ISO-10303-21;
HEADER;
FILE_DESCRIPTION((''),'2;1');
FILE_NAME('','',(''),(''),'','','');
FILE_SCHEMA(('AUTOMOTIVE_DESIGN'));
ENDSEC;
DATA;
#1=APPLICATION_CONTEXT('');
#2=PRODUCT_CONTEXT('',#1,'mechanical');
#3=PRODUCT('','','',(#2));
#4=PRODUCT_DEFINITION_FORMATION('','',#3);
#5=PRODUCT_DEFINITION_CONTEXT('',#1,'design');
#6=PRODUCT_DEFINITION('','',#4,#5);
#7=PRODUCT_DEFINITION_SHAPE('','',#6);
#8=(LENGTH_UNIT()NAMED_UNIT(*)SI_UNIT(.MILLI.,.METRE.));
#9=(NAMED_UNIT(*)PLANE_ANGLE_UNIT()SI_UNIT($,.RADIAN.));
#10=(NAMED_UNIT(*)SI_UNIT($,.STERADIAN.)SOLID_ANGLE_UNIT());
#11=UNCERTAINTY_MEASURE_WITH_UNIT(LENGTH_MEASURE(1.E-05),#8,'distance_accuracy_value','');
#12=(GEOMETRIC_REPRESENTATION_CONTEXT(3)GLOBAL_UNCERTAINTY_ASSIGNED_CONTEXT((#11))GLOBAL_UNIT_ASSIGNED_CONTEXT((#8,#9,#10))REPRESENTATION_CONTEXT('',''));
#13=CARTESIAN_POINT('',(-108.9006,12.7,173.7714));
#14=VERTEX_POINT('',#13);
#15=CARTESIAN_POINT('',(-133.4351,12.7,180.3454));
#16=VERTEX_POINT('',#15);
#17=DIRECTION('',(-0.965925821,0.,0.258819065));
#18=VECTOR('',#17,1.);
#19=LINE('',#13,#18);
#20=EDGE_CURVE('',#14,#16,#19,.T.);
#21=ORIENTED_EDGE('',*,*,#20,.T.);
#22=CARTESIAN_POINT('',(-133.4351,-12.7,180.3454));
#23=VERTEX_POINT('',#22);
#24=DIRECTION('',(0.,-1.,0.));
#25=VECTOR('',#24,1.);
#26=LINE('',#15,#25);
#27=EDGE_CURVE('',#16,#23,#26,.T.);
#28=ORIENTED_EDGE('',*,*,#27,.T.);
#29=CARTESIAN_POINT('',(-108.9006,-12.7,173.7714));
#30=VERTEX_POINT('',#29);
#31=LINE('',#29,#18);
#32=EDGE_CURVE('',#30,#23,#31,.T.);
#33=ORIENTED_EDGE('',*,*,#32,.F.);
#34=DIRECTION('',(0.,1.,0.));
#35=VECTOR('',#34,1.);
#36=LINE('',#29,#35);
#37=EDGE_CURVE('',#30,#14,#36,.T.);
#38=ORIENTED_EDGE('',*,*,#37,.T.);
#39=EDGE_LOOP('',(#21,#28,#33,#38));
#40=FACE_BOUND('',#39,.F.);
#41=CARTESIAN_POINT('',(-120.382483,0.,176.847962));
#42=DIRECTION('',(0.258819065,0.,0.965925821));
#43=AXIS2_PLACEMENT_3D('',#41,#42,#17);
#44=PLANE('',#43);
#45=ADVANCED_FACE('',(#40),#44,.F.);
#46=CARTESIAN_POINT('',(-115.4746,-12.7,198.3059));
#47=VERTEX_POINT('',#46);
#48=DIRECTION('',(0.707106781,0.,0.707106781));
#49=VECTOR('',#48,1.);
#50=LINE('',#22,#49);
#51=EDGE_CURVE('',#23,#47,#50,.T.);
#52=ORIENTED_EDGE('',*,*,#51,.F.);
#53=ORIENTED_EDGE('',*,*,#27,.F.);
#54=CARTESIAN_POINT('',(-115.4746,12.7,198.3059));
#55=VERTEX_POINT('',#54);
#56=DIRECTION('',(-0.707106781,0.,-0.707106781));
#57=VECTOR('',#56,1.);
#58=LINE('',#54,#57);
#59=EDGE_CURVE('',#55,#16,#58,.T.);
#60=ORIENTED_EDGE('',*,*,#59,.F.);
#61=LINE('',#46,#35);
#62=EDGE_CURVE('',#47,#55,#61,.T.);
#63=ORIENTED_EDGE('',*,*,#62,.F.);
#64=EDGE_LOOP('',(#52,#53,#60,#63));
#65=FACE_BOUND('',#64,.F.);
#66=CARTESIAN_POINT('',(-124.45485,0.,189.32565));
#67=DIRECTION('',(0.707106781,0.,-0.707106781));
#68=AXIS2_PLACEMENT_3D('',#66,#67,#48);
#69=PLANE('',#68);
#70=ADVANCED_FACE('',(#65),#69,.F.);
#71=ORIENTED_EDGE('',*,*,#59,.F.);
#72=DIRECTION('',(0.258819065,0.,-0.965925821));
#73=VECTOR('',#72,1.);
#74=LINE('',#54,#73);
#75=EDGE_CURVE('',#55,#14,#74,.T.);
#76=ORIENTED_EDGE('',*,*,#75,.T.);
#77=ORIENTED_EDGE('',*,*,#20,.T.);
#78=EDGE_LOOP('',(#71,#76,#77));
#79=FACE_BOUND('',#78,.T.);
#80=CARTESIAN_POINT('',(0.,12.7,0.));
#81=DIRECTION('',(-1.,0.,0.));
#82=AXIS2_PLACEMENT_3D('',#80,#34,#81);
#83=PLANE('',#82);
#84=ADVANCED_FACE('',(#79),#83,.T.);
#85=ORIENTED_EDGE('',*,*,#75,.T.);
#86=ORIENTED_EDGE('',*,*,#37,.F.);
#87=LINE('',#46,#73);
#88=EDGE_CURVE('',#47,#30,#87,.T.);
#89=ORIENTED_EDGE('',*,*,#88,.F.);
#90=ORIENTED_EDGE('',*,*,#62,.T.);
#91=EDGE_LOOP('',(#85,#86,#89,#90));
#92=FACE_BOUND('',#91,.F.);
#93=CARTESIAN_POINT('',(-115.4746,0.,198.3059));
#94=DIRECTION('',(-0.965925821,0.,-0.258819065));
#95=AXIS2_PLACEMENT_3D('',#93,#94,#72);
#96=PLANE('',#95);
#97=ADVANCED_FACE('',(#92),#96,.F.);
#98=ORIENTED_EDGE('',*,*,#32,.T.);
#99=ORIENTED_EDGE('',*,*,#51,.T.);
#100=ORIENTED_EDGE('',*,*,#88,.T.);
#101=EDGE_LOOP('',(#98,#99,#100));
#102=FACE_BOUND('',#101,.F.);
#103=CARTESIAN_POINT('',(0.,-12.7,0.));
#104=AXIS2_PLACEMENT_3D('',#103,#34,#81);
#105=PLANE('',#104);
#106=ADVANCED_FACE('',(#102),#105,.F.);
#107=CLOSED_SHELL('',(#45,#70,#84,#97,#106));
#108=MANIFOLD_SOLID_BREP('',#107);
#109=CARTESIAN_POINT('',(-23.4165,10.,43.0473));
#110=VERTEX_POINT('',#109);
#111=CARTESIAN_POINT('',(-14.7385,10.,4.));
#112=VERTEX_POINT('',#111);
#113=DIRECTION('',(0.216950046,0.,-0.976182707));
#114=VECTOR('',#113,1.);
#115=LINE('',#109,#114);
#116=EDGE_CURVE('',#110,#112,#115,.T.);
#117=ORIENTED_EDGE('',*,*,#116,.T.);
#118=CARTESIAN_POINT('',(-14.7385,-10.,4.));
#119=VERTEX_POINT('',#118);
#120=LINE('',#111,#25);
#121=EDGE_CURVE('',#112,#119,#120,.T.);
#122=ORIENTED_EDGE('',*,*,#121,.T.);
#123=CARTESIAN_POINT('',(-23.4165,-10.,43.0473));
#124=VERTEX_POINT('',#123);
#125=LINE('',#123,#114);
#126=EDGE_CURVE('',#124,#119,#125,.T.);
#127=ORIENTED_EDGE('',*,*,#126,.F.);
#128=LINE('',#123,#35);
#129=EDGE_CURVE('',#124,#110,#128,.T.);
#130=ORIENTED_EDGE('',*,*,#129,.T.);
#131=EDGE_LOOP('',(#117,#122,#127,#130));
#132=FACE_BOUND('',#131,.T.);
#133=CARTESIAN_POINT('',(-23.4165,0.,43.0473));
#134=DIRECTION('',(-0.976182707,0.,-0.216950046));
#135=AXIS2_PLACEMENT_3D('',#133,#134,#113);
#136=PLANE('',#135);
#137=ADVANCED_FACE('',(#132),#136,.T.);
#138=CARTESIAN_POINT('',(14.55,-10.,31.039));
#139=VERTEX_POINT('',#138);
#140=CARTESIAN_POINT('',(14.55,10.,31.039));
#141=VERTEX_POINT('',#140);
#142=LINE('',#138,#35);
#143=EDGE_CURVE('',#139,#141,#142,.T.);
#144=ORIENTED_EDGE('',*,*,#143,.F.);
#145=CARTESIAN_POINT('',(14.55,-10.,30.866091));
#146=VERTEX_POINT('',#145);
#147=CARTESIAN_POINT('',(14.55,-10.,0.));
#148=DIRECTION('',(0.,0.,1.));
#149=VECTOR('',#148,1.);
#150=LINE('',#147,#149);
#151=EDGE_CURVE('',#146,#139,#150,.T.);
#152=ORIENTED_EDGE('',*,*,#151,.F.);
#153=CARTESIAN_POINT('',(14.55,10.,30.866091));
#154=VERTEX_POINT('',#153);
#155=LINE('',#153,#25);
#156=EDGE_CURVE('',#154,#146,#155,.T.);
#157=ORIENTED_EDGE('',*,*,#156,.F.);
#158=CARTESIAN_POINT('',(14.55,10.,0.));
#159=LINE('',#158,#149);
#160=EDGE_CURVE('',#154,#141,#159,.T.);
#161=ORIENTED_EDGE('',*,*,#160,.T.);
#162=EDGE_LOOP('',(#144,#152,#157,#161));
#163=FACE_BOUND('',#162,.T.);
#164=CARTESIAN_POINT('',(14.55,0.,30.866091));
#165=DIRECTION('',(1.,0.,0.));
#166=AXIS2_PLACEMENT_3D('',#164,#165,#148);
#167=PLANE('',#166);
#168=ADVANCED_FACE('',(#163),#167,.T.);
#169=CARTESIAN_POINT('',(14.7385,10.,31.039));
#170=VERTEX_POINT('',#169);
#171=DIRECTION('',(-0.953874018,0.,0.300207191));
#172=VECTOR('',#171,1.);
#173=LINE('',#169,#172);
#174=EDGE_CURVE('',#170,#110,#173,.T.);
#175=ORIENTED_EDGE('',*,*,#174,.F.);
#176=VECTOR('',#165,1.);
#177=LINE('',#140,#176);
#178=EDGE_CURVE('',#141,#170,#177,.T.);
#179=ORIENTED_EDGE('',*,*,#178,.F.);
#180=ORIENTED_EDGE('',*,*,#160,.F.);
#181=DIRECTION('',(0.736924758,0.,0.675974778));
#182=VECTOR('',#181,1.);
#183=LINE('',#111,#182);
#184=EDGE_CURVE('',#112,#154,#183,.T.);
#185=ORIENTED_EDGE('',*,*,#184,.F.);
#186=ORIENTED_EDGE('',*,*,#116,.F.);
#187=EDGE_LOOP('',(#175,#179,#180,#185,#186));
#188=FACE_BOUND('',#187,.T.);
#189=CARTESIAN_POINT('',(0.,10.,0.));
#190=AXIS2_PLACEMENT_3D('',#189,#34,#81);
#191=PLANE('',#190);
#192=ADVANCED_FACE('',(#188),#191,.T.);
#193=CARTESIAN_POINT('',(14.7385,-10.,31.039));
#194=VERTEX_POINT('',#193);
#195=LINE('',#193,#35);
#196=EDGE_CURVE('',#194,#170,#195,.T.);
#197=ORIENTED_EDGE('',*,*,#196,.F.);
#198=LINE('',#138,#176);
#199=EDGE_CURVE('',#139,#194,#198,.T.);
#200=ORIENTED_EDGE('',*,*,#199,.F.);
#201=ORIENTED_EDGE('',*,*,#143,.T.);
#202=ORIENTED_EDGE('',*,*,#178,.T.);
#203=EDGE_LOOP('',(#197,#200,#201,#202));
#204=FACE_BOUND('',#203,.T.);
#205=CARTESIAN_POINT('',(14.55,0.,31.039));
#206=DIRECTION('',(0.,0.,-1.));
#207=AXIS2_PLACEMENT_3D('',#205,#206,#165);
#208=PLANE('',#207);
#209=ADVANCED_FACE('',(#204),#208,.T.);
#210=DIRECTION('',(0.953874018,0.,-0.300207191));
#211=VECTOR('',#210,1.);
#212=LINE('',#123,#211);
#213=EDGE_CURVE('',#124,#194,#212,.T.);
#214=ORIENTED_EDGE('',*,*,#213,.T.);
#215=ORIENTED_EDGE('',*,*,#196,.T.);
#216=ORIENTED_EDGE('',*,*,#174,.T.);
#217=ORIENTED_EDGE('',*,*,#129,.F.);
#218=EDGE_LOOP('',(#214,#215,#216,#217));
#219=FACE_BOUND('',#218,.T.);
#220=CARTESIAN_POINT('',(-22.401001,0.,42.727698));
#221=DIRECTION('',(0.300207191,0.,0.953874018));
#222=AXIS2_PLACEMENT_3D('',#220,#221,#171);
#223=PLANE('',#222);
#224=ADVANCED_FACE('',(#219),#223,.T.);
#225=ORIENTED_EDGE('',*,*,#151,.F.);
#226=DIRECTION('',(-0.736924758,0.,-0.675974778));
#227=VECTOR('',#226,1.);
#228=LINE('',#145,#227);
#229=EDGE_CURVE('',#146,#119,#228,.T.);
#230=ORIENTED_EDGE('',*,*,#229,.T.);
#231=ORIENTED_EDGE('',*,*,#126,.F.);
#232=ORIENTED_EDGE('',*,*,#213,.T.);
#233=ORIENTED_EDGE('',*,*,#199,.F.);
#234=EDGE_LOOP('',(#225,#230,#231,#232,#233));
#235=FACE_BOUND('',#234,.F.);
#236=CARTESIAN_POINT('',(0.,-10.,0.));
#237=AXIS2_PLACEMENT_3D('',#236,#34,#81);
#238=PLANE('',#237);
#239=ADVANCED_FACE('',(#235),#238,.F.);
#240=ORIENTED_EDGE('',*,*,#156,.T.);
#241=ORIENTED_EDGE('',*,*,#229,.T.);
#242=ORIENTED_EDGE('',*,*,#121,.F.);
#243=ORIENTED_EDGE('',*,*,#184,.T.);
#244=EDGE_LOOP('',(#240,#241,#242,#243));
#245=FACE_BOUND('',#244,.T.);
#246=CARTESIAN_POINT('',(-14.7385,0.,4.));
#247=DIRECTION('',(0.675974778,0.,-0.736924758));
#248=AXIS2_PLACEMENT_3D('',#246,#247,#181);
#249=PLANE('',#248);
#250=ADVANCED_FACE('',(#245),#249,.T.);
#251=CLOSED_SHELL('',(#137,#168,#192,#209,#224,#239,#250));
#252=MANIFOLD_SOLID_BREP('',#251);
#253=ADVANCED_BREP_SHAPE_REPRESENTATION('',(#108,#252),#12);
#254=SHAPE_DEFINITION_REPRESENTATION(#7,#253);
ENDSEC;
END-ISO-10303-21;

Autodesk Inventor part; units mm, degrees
ref_plane "YZ Plane" through (0, 0, 0) normal (1, 0, 0) x (0, 1, 0)
ref_plane "XZ Plane" through (0, 0, 0) normal (0, 1, 0) x (-1, 0, 0)
ref_plane "XY Plane" through (0, 0, 0) normal (0, 0, 1) x (1, 0, 0)
sketch "PENTAPRISMA" plane through (0, 0, 0) normal (0, 0, 1) x (1, 0, 0)
  line L0 (-36.8404, 92.0637) -> (-26.2338, 81.4571)
  line L1 (-26.2338, 81.4571) -> (-15.6272, 92.0637)
  line L2 (-15.6272, 92.0637) -> (-20.5273, 103.8937)
  line L3 (-20.5273, 103.8937) -> (-31.9403, 103.8937)
  line L4 (-31.9403, 103.8937) -> (-36.8404, 92.0637)
  line L5 (-20.9305, 86.7604) -> (-26.2338, 92.0637) construction
  line L6 (-26.2338, 92.0637) -> (-31.5371, 86.7604) construction
  line L7 (-26.2338, 81.4571) -> (-26.2338, 103.8937) construction
  dimension "d114" = 90
  dimension "d115" = 112.5
  dimension "d116" = 112.5
  dimension "d117" = 112.5
  dimension "d118" = 15
sketch "PRISMA.ENTRADA" plane through (0, 0, 0) normal (0, 0, 1) x (1, 0, 0)
  line L0 (57.6201, 1.807) -> (40.3499, 20.4323)
  line L1 (40.3499, 20.4323) -> (32.8551, -3.8368)
  line L2 (32.8551, -3.8368) -> (57.6201, 1.807)
  line L3 (45.2376, -1.0149) -> (46.3486, -5.8899) construction
  line L4 (45.2376, -1.0149) -> (62.1685, -11.6611)
  line L5 (45.2376, -1.0149) -> (37.1097, 9.9401) construction
  line L6 (45.2376, -1.0149) -> (36.8424, 9.0746) construction
  line L7 (37.1097, 9.9401) -> (31.8295, 29.2305)
  line L8 (36.8424, 9.0746) -> (29.4513, 27.6587)
  line L9 (45.2376, -1.0149) -> (35.5983, 5.0463) construction
  point P0 (40.854, 14.8365)
  dimension "d132" = 5
  dimension "d133" = 25.4
  dimension "d134" = 20
  dimension "d135" = 45
  dimension "d136" = 20
  dimension "d137" = 20
  dimension "d140" = 42.53
  dimension "d141" = 36.15
  dimension "d142" = 18.075
  dimension "d143" = 21.265
sketch "OTICA" plane through (0, 0, 0) normal (0, 1, 0) x (-1, 0, 0)
  line L0 (23.4165, 43.0473) -> (14.7385, 4)
  line L1 (14.7385, 4) -> (-14.7385, 31.039)
  line L2 (-14.7385, 31.039) -> (23.4165, 43.0473)
  line L3 (7.0299, 37.8901) -> (22.401, 42.7277) construction
  line L4 (101.5992, 157.0905) -> (-13.7385, 31.3538)
  line L5 (101.6654, 151.2273) -> (22.401, 42.7277)
  line L6 (14.55, 0) -> (-14.55, 0)
  line L7 (-13.7385, 31.3538) -> (-14.3522, 30.6847) construction
  line L8 (22.401, 42.7277) -> (2.3861, 15.3307) construction
  line L9 (22.401, 42.7277) -> (10.9082, 7.5135)
  line L10 (10.9082, 7.5135) -> (10.9082, 0)
  line L11 (-13.7385, 31.3538) -> (-14.0918, 30.4459)
  line L12 (-14.0918, 30.4459) -> (-14.0918, 0)
  line L13 (14.55, 0) -> (14.55, 4)
  line L14 (14.55, 4) -> (14.7385, 4)
  line L15 (-14.55, 0) -> (-14.55, 31.039)
  line L16 (-14.55, 31.039) -> (-14.7385, 31.039)
  line L17 (14.55, 0) -> (55.2636, 0)
  line L18 (115.4746, 198.3059) -> (108.9006, 173.7714)
  line L19 (108.9006, 173.7714) -> (133.4351, 180.3454)
  line L20 (133.4351, 180.3454) -> (115.4746, 198.3059)
  line L21 (124.4548, 189.3256) -> (127.9904, 192.8612) construction
  line L22 (124.4548, 189.3256) -> (124.4548, 209.3256)
  line L23 (124.4548, 189.3256) -> (119.5075, 176.6135) construction
  line L24 (124.4548, 189.3256) -> (120.3825, 176.8479) construction
  line L25 (119.5075, 176.6135) -> (105.988, 161.875)
  line L26 (120.3825, 176.8479) -> (108.5845, 160.6984)
  line L27 (124.4548, 189.3256) -> (124.4548, 177.9391) construction
  point P0 (0, 0)
  point P1 (0, 0)
  point P2 (0, 0)
  point P3 (-14.55, 30.8662)
  dimension "d1" = 40
  dimension "d188" = 29.1
  dimension "d189" = 36.15
  dimension "d190" = 42.53
  dimension "d191" = 21.265
  dimension "d192" = 18.075
  dimension "d197" = 4
  dimension "d205" = 1
  dimension "d208" = 25
  dimension "d209" = 0.4582
  dimension "d210" = 3.6418
  dimension "d211" = 1.0155
  dimension "d212" = 0.6467
  dimension "d213" = 3.8303
extrude "Extrusion20" add sketch "OTICA" along normal mid plane 25.4 contours L20 L19 L18
extrude "Extrusion21" add sketch "OTICA" along normal mid plane 20 contours L0 L1 L9 L2 | L9 L1 L11 L2 | L11 L1 L15 L16 L2
properties part number "PrismsGeometry" material "Nylon 6/6"
